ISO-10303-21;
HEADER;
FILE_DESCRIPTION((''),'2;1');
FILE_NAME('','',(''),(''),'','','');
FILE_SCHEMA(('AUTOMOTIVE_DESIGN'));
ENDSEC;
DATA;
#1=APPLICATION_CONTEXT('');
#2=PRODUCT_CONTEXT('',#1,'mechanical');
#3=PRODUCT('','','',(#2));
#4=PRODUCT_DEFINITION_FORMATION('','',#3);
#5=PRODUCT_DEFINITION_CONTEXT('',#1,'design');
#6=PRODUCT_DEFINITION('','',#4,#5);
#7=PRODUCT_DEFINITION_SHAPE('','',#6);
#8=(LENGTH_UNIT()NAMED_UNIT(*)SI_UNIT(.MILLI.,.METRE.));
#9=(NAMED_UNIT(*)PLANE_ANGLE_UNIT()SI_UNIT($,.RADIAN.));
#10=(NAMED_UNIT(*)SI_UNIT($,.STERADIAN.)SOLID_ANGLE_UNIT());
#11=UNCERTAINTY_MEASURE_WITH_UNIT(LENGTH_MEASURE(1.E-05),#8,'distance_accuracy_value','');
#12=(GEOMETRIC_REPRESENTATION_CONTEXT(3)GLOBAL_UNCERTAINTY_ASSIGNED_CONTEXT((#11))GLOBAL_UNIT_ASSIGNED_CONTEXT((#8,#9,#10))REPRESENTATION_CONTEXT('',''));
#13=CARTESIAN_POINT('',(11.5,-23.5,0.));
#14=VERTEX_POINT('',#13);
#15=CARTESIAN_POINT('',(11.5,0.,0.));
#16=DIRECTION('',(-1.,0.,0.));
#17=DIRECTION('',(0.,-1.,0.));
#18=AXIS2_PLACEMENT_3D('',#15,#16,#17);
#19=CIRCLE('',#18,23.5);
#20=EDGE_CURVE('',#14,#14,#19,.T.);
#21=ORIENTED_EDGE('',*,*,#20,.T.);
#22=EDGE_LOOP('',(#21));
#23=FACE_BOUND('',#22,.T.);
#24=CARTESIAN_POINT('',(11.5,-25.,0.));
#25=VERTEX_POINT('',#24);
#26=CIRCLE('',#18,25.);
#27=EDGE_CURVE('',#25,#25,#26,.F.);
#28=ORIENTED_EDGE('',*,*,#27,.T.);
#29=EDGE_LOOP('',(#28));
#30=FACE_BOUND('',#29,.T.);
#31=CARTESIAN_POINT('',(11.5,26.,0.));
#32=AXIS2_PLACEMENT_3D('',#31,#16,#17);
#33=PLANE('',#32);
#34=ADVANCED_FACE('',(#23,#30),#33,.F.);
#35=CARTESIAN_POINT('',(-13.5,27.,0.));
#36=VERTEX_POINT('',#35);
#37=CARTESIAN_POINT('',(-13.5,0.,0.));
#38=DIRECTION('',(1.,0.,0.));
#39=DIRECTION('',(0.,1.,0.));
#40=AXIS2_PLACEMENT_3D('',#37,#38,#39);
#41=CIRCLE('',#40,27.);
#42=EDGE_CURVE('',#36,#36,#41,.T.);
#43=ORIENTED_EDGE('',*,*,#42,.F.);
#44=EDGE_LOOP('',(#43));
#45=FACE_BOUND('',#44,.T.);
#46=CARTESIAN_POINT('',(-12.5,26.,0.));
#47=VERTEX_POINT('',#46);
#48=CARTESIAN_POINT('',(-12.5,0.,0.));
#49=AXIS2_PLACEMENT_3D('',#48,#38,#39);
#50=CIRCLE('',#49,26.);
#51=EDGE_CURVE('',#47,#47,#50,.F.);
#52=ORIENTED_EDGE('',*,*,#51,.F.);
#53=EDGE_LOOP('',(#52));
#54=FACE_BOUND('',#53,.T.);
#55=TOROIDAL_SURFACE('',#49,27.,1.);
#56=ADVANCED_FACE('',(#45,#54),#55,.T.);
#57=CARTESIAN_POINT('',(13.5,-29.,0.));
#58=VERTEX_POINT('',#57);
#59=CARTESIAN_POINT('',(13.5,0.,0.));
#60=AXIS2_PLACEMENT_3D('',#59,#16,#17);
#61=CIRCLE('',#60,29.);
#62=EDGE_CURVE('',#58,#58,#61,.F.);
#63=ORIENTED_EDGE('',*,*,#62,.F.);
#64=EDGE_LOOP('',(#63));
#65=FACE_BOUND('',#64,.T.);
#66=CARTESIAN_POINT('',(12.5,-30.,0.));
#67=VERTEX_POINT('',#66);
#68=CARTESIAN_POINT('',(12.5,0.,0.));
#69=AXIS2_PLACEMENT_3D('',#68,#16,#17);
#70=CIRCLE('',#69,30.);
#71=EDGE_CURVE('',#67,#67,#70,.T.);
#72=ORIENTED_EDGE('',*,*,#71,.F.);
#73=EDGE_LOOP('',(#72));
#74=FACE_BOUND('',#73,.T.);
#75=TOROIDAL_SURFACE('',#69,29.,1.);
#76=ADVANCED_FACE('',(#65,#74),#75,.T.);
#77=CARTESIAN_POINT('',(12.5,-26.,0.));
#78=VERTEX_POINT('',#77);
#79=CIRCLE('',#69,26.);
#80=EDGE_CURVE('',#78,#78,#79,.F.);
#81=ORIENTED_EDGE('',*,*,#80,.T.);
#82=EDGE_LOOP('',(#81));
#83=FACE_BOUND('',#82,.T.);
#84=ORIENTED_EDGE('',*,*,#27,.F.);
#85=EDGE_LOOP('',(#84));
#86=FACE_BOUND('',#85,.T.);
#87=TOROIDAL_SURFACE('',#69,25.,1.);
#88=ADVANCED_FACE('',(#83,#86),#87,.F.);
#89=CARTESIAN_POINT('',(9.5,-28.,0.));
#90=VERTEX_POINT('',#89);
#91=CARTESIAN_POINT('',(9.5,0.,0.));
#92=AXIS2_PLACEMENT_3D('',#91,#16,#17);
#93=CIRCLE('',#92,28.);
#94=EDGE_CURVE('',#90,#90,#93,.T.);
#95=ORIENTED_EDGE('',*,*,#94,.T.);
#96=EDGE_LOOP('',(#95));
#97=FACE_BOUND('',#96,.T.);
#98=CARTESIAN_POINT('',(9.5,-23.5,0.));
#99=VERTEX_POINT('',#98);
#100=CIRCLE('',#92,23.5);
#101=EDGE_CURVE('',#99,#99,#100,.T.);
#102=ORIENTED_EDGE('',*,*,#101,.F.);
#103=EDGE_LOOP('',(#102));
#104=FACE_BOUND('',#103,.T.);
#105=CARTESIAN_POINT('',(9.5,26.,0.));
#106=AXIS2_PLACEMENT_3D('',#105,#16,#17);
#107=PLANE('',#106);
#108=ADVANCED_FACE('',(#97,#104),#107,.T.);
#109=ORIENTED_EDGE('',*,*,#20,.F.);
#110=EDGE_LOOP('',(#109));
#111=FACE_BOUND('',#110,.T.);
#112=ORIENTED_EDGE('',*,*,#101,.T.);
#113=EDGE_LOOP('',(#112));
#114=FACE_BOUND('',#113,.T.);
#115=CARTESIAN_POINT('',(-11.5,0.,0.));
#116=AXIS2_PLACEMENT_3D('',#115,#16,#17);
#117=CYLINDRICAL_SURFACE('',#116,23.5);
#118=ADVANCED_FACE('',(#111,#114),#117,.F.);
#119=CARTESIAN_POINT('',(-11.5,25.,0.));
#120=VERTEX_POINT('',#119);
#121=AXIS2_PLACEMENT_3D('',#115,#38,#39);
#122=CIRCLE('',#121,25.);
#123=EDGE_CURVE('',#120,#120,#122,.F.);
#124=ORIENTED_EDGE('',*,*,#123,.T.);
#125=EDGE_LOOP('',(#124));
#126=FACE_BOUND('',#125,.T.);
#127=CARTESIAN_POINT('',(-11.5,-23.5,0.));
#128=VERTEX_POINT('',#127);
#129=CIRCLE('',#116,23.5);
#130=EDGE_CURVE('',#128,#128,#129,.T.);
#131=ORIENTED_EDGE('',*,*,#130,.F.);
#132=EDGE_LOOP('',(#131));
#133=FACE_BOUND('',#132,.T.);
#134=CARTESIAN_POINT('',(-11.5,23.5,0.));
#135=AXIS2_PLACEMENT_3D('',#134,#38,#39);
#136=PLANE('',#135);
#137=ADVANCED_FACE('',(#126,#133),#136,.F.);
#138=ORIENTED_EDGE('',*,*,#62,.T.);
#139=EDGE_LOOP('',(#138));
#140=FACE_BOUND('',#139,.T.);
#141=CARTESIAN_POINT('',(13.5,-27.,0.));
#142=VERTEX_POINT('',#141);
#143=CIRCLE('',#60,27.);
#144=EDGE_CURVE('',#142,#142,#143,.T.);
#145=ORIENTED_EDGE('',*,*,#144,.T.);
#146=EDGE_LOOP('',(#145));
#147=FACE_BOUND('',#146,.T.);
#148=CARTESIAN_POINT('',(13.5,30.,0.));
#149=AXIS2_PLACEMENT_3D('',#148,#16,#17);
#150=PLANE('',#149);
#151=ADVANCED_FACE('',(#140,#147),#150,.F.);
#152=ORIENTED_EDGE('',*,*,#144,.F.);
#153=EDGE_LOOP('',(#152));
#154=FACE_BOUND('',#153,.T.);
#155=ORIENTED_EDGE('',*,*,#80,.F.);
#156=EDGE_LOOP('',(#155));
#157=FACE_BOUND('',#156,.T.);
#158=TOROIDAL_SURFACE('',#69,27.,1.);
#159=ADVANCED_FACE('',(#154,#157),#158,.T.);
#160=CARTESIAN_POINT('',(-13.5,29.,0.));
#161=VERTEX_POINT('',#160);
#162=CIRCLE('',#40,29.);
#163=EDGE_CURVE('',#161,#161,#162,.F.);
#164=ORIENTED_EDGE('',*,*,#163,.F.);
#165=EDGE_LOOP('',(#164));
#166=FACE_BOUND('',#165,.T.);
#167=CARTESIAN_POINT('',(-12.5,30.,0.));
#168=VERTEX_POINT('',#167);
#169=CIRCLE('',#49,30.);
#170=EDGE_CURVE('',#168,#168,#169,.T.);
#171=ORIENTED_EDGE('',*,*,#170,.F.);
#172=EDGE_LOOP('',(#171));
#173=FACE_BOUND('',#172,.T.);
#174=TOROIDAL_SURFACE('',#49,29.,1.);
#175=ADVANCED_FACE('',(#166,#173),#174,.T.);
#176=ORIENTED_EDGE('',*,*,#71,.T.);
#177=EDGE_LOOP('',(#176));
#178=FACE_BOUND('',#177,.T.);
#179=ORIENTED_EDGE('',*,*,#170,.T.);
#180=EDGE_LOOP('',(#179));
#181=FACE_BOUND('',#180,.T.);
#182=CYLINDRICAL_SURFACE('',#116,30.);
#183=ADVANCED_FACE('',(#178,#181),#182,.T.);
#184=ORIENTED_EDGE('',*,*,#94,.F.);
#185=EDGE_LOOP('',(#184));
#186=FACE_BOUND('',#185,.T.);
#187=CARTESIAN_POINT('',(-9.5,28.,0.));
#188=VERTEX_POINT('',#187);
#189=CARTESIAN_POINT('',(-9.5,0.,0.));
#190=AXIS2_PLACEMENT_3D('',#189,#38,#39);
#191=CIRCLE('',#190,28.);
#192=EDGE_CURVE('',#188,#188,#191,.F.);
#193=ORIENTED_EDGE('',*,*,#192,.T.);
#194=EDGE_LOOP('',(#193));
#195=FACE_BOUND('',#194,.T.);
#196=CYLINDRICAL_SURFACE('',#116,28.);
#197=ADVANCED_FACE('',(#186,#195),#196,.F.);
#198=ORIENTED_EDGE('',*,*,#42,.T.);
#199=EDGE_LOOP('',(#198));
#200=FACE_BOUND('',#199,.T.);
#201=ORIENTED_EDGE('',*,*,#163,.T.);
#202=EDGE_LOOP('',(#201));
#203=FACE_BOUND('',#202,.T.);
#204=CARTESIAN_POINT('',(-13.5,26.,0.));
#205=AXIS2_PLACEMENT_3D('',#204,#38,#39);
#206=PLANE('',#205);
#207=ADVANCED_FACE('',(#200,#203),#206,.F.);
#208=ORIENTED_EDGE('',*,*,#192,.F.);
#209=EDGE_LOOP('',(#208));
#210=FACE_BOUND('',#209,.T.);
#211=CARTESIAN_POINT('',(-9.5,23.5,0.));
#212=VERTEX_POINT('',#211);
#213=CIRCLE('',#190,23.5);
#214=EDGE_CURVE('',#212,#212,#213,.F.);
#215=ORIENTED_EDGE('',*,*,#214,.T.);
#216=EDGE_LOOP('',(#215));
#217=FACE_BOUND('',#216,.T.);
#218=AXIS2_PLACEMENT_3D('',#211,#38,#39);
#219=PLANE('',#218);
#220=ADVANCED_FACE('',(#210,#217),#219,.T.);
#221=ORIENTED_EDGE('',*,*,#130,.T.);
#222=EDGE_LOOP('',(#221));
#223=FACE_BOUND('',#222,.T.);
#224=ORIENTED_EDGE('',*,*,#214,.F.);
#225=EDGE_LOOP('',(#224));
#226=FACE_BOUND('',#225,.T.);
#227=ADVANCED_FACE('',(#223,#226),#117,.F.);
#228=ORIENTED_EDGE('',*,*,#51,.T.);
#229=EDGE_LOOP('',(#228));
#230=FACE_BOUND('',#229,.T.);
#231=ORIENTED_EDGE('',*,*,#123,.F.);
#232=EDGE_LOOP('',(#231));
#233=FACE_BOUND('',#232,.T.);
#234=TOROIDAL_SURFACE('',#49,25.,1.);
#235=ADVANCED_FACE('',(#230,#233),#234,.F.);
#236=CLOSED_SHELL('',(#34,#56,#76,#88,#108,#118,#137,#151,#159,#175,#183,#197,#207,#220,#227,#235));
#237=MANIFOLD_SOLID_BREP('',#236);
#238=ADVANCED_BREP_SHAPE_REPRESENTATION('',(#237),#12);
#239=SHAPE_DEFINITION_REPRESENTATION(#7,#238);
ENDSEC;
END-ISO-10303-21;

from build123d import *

# Parameters (mm, degrees)
SHELL1_START       = -9.5
SHELL1_OUTLINE_R   = 28
SHELL1_OUTLINE_R_2 = 23.5
SHELL1_DEPTH       = 19
FILLET1_R          = 1


# Read off the part's stored shape, not the designer's step: Shell1
with BuildPart() as part:
    # Sketch1 → Revolve1 (revolve)
    with BuildSketch(Plane.XY, mode=Mode.PRIVATE) as revolve1_sk:
        Polygon((-11.5, 23.5), (-11.5, 26), (-13.5, 26), (-13.5, 30), (13.5, 30), (13.5, 26), (11.5, 26), (11.5, 23.5), align=None)
    revolve(revolve1_sk.sketch.rotate(Axis((-11.5, 0, 0), (1, 0, 0)), 180), axis=Axis((-11.5, 0, 0), (1, 0, 0)))

    # Shell1 outline → Shell1 (cut)
    with BuildSketch(Plane.YZ.offset(SHELL1_START)):
        Circle(SHELL1_OUTLINE_R)
        Circle(SHELL1_OUTLINE_R_2, mode=Mode.SUBTRACT)
    extrude(amount=SHELL1_DEPTH, mode=Mode.SUBTRACT)

    # Fillet1
    fillet1_edges = [part.edges().sort_by_distance(p)[0] for p in [
        (11.5, 26, 0),
        (13.5, 26, 0),
        (13.5, 30, 0),
        (-13.5, 30, 0),
        (-13.5, 26, 0),
        (-11.5, 26, 0),
    ]]
    fillet(fillet1_edges, radius=FILLET1_R - 0.0001)  # a hair under: the kernel refuses the full size


solid = part.part
